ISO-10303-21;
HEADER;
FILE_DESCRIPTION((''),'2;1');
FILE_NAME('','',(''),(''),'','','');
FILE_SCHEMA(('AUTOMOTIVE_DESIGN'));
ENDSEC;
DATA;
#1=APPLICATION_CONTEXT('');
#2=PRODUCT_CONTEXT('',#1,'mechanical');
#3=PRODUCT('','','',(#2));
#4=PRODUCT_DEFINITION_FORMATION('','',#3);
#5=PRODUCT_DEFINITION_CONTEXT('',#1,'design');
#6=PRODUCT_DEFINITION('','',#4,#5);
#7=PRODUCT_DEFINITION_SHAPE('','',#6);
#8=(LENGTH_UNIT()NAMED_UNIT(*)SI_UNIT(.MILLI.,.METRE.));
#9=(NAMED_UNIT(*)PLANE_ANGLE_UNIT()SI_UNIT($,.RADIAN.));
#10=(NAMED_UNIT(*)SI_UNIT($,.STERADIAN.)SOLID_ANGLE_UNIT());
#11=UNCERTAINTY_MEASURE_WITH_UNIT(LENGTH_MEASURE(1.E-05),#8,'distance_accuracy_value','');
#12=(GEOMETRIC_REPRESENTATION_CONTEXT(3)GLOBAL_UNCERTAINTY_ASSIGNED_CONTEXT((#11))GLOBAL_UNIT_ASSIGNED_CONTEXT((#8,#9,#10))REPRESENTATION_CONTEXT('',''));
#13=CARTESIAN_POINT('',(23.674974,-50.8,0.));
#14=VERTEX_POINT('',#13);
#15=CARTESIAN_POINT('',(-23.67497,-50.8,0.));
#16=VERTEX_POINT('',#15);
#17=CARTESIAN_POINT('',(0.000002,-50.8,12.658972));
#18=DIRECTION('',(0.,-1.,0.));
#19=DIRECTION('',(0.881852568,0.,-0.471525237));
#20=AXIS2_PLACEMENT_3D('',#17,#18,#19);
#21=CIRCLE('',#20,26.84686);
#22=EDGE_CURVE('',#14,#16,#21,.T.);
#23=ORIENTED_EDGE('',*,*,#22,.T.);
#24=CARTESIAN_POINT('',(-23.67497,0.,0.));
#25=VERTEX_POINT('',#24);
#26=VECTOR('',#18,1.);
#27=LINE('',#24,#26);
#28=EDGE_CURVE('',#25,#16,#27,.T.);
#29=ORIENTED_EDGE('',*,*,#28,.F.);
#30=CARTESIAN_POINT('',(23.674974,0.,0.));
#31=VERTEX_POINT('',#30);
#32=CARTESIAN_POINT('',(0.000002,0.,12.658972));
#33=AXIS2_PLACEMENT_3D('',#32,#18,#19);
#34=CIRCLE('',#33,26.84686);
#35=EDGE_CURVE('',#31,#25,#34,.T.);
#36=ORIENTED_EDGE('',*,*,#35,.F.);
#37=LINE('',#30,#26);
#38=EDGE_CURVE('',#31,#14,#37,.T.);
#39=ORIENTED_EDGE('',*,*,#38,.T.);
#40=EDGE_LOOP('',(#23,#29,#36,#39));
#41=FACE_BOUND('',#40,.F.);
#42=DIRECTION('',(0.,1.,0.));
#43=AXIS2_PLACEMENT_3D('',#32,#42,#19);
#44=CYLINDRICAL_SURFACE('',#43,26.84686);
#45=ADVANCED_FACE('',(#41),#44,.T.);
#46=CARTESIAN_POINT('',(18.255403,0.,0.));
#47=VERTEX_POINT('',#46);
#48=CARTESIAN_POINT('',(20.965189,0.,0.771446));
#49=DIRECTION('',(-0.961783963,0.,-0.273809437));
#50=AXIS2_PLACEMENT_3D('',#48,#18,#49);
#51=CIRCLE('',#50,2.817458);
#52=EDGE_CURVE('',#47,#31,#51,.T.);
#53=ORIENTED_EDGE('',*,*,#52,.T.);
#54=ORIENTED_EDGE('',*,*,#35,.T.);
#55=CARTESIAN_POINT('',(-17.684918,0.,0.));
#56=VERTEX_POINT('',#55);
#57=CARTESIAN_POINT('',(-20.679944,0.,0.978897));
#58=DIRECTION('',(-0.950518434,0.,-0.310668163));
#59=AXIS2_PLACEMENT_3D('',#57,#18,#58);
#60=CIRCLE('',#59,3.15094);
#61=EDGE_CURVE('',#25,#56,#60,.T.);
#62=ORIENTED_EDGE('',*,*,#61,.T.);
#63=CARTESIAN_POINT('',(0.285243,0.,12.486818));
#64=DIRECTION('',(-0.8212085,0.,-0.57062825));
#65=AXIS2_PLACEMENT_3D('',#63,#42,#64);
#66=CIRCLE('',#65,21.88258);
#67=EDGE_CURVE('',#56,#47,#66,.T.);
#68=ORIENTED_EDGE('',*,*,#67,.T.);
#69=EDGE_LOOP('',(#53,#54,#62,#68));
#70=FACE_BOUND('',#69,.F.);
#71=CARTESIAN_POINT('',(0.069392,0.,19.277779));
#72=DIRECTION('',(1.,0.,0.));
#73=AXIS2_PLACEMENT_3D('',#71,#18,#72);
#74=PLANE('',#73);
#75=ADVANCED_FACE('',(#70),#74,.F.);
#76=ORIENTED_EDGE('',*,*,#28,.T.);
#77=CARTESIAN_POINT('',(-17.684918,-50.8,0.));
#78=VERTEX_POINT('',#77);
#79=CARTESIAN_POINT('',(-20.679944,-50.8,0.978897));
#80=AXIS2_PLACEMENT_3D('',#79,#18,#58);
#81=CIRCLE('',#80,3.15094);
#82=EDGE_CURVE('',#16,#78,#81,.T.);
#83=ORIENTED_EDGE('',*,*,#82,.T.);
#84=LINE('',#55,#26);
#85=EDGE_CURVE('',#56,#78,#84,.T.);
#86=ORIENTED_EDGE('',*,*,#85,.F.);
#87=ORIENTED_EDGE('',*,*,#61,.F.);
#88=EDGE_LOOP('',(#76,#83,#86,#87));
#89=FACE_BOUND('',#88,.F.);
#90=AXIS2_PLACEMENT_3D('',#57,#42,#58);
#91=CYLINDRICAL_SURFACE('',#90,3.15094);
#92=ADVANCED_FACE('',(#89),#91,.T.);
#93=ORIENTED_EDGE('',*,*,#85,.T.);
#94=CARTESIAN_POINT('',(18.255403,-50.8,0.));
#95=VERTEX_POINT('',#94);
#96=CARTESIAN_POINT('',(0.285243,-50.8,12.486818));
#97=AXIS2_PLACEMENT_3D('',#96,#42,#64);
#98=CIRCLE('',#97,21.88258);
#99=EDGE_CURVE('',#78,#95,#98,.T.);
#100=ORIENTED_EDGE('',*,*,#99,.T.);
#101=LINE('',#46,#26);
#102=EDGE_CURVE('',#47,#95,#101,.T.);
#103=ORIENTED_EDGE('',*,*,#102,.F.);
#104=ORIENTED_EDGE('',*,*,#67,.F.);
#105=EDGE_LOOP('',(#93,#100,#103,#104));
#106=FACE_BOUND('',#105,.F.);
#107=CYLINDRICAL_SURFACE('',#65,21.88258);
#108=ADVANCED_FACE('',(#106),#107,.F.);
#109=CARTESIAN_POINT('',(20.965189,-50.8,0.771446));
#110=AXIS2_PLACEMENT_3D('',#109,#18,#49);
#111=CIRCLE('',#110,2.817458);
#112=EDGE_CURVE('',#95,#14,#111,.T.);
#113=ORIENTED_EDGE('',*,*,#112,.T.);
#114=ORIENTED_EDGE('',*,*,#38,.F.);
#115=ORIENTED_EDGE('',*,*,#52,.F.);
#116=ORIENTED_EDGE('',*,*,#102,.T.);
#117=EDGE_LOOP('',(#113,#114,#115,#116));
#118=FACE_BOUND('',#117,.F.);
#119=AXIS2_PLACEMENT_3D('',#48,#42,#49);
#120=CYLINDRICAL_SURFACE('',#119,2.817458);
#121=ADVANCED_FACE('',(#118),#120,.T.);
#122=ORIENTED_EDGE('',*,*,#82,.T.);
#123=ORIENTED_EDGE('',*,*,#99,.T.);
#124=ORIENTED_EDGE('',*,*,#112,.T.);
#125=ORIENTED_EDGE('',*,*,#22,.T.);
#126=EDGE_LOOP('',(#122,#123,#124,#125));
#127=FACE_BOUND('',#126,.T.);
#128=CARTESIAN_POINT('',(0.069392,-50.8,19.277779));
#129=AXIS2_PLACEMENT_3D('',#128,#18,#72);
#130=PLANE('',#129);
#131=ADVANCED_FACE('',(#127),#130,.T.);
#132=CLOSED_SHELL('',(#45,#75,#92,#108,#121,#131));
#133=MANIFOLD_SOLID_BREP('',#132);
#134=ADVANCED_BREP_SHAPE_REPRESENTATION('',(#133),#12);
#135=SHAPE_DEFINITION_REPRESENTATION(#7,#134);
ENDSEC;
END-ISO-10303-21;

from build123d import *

# Parameters (mm, degrees)
F1_DEPTH = 50.8


# Not quite as in the source:
# - the program builds the solid bodies; features that only make, move or delete a surface that nothing else refers to are left out


with BuildPart() as f1:
    # F0 (on Front) → F1 (new body)
    with BuildSketch(Plane.XZ):
        with BuildLine():
            ThreePointArc((18.2554032654, 0), (20.9651887417, -2.0460110738), (23.674974218, 0))
            ThreePointArc((23.674974218, 0), (1.8626e-06, 39.5058318973), (-23.6749704927, 0))
            ThreePointArc((-23.6749704927, 0), (-20.6799441949, -2.1720430736), (-17.684917897, 0))
            ThreePointArc((-17.684917897, 0), (0.2852426842, 34.3693981049), (18.2554032654, 0))
        make_face()
    extrude(amount=F1_DEPTH)


solid = f1.part
